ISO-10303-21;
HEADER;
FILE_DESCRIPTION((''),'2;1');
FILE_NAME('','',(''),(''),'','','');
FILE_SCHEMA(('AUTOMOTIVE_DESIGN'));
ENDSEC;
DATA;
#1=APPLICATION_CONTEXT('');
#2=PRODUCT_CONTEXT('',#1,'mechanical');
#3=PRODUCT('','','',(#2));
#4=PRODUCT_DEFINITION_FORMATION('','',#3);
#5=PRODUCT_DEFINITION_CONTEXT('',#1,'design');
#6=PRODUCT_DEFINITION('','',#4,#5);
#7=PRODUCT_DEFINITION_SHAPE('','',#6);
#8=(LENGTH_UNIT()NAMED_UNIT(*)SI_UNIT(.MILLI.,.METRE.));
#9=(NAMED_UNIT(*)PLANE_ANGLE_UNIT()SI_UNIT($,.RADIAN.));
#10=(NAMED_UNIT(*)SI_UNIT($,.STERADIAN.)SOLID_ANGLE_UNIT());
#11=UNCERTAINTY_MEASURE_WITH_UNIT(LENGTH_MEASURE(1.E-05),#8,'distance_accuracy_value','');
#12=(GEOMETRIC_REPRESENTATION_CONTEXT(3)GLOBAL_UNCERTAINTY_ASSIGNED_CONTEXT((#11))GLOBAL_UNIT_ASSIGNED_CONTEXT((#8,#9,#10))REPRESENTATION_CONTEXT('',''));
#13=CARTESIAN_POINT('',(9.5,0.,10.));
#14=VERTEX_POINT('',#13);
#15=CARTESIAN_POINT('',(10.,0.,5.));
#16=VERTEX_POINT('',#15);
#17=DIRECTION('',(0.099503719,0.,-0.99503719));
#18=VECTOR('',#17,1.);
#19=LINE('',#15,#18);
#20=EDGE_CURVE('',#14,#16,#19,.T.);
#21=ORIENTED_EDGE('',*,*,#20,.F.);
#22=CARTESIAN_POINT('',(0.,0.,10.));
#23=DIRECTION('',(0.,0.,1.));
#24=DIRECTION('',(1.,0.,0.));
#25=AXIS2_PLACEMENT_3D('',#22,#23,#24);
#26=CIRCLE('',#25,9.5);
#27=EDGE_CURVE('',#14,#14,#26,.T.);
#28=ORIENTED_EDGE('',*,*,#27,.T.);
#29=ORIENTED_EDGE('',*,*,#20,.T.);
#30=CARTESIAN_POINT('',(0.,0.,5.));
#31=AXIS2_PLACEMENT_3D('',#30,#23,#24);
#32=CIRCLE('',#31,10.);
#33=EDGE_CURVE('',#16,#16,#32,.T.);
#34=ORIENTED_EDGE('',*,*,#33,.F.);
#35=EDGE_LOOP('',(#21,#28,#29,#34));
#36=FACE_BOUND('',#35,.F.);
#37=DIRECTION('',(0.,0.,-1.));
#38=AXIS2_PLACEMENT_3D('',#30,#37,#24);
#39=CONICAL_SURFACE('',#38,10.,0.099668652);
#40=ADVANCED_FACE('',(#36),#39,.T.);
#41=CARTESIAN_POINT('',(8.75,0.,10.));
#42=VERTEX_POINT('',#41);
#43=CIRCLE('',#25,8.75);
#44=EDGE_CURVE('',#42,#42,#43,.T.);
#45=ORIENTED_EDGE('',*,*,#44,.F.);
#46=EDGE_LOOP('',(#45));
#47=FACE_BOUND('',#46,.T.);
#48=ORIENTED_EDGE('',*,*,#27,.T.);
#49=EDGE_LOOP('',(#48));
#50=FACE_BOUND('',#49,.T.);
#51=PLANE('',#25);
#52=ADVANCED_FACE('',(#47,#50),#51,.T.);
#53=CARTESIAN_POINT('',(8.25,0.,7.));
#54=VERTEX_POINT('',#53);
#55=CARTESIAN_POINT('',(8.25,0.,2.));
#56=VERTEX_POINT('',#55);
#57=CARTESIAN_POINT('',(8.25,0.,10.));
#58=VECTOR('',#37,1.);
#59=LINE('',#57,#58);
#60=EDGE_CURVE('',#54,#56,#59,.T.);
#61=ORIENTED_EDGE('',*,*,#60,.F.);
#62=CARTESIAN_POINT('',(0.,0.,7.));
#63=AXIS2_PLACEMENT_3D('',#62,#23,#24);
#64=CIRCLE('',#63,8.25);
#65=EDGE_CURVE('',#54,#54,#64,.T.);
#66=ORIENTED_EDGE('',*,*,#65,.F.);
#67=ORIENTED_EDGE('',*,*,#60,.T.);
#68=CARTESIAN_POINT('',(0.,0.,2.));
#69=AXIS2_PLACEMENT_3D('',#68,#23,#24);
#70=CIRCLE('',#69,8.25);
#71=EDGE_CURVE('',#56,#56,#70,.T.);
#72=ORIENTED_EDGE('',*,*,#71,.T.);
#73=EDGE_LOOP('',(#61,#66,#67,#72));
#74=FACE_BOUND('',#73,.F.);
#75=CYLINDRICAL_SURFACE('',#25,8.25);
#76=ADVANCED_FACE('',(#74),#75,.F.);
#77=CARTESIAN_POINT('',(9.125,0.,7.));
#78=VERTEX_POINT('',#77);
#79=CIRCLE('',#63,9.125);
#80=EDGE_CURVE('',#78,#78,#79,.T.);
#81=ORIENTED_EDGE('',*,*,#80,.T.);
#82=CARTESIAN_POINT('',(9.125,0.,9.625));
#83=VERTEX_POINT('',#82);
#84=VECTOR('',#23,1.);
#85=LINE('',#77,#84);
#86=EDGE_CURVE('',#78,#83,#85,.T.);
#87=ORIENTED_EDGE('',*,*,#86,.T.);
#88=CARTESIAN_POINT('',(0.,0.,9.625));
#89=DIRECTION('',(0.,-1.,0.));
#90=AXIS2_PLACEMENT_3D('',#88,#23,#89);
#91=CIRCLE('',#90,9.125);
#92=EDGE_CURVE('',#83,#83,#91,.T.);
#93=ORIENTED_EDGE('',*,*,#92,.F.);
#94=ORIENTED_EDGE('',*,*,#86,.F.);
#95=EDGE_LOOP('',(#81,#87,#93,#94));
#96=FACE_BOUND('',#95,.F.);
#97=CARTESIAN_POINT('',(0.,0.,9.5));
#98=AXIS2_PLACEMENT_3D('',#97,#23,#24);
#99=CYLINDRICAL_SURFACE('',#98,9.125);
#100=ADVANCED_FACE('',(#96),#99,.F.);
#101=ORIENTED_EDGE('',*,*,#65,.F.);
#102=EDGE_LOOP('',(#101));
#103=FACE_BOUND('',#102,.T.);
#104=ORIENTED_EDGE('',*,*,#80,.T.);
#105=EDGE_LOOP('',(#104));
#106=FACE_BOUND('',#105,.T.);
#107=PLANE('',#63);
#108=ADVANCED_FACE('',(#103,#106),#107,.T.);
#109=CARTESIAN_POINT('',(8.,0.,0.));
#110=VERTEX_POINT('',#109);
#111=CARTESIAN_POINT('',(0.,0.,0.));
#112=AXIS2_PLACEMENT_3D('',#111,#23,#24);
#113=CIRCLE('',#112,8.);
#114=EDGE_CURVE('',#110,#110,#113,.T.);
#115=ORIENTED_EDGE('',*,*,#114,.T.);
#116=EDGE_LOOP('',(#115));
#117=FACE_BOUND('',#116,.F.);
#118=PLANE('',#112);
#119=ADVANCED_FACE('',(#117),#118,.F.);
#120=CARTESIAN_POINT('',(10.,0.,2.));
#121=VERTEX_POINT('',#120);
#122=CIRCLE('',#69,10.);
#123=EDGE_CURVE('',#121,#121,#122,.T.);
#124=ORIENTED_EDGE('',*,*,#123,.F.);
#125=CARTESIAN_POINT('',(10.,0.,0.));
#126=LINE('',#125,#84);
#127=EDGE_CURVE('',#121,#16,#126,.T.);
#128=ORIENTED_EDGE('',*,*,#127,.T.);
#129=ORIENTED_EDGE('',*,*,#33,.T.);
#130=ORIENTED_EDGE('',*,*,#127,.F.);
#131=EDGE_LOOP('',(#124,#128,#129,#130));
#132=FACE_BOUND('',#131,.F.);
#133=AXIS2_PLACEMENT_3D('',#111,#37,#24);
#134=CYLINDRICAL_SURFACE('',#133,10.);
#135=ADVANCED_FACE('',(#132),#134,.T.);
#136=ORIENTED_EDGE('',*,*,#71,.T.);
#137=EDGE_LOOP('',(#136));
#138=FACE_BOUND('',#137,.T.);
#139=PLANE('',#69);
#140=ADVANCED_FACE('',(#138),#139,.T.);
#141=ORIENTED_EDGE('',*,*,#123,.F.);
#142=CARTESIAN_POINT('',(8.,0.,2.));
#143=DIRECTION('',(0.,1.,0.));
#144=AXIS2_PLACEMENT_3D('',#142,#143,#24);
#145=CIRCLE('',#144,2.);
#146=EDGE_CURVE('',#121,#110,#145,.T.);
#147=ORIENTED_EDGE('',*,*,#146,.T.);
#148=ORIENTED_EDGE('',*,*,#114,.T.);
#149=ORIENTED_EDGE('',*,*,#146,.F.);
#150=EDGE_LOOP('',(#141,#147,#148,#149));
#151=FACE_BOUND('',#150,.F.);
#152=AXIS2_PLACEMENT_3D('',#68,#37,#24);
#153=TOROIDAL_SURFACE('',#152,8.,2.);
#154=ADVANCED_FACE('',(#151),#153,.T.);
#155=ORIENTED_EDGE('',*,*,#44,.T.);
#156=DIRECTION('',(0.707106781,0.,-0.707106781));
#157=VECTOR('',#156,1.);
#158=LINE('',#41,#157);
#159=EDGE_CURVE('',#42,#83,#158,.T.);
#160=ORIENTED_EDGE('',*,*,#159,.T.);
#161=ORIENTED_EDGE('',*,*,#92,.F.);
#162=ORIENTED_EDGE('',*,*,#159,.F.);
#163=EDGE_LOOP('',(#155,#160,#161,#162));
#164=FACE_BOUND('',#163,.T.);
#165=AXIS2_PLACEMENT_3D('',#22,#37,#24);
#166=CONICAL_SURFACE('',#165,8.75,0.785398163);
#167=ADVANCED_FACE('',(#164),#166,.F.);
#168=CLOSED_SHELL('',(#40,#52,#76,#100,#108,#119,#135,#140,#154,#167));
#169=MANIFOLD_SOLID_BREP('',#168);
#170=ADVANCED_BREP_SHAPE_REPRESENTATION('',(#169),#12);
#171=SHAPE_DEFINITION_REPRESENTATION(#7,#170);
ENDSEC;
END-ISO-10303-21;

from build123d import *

# Parameters (mm, degrees)
F0_R        = 10
F1_DEPTH    = 10
F2_R        = 8.25
F3_DEPTH    = 8
F4_R        = 9.125
F4_R_2      = 8.25
F5_DEPTH    = 3
F6_R        = 9.125
F6_R_2      = 8.75
F7_DEPTH    = 1
F8_R        = 2
F9_S5_R     = 9.125
F9_T6_DEPTH = 15
F10_SIZE2   = 5
F10_SIZE    = 0.5


# Not quite as in the source:
# - a fillet or chamfer that OpenCascade refuses, or shapes differently, is made with other operations: its cross-section is extruded or revolved along the edge and cut away or added


with BuildPart() as f1:
    # F0 (on Top) → F1 (new body)
    with BuildSketch(Plane.XY):
        Circle(F0_R)
    extrude(amount=F1_DEPTH)

    # F2 (on face) → F3 (cut)
    with BuildSketch(Plane.XY.offset(10)):
        Circle(F2_R)
    extrude(amount=-F3_DEPTH, mode=Mode.SUBTRACT)

    # F4 (on face) → F5 (cut)
    with BuildSketch(Plane.XY.offset(10)):
        Circle(F4_R)
        Circle(F4_R_2, mode=Mode.SUBTRACT)
    extrude(amount=-F5_DEPTH, mode=Mode.SUBTRACT)

    # F6 (on face) → F7 (join)
    with BuildSketch(Plane.XY.offset(10)):
        Circle(F6_R)
        Circle(F6_R_2, mode=Mode.SUBTRACT)
    extrude(amount=-F7_DEPTH)

    # F8
    f8_edges = [f1.edges().sort_by_distance(p)[0] for p in [
        (-10, 0, 0),
    ]]
    fillet(f8_edges, radius=F8_R)

    # F9: chamfer of 1 on 1 edges, made by hand


with BuildPart() as f9_tool2:
    # F9_s3 → F9_t4 (revolve)
    with BuildSketch(Plane.XZ):
        Polygon((8.75, 10), (9.75, 9), (8.75, 9), align=None)
    revolve(axis=Axis((0, 0, 9), (0, 0, 1)))

    # F9_s5 → F9_t6 (intersect, symmetric)
    with BuildSketch(Plane.XY.offset(9.5)):
        Circle(F9_S5_R)
    extrude(amount=F9_T6_DEPTH, both=True, mode=Mode.INTERSECT)


with BuildPart() as f1_1:
    add(f1.part)

    # F9_t1: cut F9_tool2
    add(f9_tool2.part, mode=Mode.SUBTRACT)

    # F10
    f10_edges = [f1_1.edges().sort_by_distance(p)[0] for p in [
        (-10, 0, 10),
    ]]
    f10_side = f1_1.faces().sort_by_distance((-9.717157, 0, 10))[0]
    chamfer(f10_edges, length=F10_SIZE, length2=F10_SIZE2, reference=f10_side)


solid = f1_1.part
